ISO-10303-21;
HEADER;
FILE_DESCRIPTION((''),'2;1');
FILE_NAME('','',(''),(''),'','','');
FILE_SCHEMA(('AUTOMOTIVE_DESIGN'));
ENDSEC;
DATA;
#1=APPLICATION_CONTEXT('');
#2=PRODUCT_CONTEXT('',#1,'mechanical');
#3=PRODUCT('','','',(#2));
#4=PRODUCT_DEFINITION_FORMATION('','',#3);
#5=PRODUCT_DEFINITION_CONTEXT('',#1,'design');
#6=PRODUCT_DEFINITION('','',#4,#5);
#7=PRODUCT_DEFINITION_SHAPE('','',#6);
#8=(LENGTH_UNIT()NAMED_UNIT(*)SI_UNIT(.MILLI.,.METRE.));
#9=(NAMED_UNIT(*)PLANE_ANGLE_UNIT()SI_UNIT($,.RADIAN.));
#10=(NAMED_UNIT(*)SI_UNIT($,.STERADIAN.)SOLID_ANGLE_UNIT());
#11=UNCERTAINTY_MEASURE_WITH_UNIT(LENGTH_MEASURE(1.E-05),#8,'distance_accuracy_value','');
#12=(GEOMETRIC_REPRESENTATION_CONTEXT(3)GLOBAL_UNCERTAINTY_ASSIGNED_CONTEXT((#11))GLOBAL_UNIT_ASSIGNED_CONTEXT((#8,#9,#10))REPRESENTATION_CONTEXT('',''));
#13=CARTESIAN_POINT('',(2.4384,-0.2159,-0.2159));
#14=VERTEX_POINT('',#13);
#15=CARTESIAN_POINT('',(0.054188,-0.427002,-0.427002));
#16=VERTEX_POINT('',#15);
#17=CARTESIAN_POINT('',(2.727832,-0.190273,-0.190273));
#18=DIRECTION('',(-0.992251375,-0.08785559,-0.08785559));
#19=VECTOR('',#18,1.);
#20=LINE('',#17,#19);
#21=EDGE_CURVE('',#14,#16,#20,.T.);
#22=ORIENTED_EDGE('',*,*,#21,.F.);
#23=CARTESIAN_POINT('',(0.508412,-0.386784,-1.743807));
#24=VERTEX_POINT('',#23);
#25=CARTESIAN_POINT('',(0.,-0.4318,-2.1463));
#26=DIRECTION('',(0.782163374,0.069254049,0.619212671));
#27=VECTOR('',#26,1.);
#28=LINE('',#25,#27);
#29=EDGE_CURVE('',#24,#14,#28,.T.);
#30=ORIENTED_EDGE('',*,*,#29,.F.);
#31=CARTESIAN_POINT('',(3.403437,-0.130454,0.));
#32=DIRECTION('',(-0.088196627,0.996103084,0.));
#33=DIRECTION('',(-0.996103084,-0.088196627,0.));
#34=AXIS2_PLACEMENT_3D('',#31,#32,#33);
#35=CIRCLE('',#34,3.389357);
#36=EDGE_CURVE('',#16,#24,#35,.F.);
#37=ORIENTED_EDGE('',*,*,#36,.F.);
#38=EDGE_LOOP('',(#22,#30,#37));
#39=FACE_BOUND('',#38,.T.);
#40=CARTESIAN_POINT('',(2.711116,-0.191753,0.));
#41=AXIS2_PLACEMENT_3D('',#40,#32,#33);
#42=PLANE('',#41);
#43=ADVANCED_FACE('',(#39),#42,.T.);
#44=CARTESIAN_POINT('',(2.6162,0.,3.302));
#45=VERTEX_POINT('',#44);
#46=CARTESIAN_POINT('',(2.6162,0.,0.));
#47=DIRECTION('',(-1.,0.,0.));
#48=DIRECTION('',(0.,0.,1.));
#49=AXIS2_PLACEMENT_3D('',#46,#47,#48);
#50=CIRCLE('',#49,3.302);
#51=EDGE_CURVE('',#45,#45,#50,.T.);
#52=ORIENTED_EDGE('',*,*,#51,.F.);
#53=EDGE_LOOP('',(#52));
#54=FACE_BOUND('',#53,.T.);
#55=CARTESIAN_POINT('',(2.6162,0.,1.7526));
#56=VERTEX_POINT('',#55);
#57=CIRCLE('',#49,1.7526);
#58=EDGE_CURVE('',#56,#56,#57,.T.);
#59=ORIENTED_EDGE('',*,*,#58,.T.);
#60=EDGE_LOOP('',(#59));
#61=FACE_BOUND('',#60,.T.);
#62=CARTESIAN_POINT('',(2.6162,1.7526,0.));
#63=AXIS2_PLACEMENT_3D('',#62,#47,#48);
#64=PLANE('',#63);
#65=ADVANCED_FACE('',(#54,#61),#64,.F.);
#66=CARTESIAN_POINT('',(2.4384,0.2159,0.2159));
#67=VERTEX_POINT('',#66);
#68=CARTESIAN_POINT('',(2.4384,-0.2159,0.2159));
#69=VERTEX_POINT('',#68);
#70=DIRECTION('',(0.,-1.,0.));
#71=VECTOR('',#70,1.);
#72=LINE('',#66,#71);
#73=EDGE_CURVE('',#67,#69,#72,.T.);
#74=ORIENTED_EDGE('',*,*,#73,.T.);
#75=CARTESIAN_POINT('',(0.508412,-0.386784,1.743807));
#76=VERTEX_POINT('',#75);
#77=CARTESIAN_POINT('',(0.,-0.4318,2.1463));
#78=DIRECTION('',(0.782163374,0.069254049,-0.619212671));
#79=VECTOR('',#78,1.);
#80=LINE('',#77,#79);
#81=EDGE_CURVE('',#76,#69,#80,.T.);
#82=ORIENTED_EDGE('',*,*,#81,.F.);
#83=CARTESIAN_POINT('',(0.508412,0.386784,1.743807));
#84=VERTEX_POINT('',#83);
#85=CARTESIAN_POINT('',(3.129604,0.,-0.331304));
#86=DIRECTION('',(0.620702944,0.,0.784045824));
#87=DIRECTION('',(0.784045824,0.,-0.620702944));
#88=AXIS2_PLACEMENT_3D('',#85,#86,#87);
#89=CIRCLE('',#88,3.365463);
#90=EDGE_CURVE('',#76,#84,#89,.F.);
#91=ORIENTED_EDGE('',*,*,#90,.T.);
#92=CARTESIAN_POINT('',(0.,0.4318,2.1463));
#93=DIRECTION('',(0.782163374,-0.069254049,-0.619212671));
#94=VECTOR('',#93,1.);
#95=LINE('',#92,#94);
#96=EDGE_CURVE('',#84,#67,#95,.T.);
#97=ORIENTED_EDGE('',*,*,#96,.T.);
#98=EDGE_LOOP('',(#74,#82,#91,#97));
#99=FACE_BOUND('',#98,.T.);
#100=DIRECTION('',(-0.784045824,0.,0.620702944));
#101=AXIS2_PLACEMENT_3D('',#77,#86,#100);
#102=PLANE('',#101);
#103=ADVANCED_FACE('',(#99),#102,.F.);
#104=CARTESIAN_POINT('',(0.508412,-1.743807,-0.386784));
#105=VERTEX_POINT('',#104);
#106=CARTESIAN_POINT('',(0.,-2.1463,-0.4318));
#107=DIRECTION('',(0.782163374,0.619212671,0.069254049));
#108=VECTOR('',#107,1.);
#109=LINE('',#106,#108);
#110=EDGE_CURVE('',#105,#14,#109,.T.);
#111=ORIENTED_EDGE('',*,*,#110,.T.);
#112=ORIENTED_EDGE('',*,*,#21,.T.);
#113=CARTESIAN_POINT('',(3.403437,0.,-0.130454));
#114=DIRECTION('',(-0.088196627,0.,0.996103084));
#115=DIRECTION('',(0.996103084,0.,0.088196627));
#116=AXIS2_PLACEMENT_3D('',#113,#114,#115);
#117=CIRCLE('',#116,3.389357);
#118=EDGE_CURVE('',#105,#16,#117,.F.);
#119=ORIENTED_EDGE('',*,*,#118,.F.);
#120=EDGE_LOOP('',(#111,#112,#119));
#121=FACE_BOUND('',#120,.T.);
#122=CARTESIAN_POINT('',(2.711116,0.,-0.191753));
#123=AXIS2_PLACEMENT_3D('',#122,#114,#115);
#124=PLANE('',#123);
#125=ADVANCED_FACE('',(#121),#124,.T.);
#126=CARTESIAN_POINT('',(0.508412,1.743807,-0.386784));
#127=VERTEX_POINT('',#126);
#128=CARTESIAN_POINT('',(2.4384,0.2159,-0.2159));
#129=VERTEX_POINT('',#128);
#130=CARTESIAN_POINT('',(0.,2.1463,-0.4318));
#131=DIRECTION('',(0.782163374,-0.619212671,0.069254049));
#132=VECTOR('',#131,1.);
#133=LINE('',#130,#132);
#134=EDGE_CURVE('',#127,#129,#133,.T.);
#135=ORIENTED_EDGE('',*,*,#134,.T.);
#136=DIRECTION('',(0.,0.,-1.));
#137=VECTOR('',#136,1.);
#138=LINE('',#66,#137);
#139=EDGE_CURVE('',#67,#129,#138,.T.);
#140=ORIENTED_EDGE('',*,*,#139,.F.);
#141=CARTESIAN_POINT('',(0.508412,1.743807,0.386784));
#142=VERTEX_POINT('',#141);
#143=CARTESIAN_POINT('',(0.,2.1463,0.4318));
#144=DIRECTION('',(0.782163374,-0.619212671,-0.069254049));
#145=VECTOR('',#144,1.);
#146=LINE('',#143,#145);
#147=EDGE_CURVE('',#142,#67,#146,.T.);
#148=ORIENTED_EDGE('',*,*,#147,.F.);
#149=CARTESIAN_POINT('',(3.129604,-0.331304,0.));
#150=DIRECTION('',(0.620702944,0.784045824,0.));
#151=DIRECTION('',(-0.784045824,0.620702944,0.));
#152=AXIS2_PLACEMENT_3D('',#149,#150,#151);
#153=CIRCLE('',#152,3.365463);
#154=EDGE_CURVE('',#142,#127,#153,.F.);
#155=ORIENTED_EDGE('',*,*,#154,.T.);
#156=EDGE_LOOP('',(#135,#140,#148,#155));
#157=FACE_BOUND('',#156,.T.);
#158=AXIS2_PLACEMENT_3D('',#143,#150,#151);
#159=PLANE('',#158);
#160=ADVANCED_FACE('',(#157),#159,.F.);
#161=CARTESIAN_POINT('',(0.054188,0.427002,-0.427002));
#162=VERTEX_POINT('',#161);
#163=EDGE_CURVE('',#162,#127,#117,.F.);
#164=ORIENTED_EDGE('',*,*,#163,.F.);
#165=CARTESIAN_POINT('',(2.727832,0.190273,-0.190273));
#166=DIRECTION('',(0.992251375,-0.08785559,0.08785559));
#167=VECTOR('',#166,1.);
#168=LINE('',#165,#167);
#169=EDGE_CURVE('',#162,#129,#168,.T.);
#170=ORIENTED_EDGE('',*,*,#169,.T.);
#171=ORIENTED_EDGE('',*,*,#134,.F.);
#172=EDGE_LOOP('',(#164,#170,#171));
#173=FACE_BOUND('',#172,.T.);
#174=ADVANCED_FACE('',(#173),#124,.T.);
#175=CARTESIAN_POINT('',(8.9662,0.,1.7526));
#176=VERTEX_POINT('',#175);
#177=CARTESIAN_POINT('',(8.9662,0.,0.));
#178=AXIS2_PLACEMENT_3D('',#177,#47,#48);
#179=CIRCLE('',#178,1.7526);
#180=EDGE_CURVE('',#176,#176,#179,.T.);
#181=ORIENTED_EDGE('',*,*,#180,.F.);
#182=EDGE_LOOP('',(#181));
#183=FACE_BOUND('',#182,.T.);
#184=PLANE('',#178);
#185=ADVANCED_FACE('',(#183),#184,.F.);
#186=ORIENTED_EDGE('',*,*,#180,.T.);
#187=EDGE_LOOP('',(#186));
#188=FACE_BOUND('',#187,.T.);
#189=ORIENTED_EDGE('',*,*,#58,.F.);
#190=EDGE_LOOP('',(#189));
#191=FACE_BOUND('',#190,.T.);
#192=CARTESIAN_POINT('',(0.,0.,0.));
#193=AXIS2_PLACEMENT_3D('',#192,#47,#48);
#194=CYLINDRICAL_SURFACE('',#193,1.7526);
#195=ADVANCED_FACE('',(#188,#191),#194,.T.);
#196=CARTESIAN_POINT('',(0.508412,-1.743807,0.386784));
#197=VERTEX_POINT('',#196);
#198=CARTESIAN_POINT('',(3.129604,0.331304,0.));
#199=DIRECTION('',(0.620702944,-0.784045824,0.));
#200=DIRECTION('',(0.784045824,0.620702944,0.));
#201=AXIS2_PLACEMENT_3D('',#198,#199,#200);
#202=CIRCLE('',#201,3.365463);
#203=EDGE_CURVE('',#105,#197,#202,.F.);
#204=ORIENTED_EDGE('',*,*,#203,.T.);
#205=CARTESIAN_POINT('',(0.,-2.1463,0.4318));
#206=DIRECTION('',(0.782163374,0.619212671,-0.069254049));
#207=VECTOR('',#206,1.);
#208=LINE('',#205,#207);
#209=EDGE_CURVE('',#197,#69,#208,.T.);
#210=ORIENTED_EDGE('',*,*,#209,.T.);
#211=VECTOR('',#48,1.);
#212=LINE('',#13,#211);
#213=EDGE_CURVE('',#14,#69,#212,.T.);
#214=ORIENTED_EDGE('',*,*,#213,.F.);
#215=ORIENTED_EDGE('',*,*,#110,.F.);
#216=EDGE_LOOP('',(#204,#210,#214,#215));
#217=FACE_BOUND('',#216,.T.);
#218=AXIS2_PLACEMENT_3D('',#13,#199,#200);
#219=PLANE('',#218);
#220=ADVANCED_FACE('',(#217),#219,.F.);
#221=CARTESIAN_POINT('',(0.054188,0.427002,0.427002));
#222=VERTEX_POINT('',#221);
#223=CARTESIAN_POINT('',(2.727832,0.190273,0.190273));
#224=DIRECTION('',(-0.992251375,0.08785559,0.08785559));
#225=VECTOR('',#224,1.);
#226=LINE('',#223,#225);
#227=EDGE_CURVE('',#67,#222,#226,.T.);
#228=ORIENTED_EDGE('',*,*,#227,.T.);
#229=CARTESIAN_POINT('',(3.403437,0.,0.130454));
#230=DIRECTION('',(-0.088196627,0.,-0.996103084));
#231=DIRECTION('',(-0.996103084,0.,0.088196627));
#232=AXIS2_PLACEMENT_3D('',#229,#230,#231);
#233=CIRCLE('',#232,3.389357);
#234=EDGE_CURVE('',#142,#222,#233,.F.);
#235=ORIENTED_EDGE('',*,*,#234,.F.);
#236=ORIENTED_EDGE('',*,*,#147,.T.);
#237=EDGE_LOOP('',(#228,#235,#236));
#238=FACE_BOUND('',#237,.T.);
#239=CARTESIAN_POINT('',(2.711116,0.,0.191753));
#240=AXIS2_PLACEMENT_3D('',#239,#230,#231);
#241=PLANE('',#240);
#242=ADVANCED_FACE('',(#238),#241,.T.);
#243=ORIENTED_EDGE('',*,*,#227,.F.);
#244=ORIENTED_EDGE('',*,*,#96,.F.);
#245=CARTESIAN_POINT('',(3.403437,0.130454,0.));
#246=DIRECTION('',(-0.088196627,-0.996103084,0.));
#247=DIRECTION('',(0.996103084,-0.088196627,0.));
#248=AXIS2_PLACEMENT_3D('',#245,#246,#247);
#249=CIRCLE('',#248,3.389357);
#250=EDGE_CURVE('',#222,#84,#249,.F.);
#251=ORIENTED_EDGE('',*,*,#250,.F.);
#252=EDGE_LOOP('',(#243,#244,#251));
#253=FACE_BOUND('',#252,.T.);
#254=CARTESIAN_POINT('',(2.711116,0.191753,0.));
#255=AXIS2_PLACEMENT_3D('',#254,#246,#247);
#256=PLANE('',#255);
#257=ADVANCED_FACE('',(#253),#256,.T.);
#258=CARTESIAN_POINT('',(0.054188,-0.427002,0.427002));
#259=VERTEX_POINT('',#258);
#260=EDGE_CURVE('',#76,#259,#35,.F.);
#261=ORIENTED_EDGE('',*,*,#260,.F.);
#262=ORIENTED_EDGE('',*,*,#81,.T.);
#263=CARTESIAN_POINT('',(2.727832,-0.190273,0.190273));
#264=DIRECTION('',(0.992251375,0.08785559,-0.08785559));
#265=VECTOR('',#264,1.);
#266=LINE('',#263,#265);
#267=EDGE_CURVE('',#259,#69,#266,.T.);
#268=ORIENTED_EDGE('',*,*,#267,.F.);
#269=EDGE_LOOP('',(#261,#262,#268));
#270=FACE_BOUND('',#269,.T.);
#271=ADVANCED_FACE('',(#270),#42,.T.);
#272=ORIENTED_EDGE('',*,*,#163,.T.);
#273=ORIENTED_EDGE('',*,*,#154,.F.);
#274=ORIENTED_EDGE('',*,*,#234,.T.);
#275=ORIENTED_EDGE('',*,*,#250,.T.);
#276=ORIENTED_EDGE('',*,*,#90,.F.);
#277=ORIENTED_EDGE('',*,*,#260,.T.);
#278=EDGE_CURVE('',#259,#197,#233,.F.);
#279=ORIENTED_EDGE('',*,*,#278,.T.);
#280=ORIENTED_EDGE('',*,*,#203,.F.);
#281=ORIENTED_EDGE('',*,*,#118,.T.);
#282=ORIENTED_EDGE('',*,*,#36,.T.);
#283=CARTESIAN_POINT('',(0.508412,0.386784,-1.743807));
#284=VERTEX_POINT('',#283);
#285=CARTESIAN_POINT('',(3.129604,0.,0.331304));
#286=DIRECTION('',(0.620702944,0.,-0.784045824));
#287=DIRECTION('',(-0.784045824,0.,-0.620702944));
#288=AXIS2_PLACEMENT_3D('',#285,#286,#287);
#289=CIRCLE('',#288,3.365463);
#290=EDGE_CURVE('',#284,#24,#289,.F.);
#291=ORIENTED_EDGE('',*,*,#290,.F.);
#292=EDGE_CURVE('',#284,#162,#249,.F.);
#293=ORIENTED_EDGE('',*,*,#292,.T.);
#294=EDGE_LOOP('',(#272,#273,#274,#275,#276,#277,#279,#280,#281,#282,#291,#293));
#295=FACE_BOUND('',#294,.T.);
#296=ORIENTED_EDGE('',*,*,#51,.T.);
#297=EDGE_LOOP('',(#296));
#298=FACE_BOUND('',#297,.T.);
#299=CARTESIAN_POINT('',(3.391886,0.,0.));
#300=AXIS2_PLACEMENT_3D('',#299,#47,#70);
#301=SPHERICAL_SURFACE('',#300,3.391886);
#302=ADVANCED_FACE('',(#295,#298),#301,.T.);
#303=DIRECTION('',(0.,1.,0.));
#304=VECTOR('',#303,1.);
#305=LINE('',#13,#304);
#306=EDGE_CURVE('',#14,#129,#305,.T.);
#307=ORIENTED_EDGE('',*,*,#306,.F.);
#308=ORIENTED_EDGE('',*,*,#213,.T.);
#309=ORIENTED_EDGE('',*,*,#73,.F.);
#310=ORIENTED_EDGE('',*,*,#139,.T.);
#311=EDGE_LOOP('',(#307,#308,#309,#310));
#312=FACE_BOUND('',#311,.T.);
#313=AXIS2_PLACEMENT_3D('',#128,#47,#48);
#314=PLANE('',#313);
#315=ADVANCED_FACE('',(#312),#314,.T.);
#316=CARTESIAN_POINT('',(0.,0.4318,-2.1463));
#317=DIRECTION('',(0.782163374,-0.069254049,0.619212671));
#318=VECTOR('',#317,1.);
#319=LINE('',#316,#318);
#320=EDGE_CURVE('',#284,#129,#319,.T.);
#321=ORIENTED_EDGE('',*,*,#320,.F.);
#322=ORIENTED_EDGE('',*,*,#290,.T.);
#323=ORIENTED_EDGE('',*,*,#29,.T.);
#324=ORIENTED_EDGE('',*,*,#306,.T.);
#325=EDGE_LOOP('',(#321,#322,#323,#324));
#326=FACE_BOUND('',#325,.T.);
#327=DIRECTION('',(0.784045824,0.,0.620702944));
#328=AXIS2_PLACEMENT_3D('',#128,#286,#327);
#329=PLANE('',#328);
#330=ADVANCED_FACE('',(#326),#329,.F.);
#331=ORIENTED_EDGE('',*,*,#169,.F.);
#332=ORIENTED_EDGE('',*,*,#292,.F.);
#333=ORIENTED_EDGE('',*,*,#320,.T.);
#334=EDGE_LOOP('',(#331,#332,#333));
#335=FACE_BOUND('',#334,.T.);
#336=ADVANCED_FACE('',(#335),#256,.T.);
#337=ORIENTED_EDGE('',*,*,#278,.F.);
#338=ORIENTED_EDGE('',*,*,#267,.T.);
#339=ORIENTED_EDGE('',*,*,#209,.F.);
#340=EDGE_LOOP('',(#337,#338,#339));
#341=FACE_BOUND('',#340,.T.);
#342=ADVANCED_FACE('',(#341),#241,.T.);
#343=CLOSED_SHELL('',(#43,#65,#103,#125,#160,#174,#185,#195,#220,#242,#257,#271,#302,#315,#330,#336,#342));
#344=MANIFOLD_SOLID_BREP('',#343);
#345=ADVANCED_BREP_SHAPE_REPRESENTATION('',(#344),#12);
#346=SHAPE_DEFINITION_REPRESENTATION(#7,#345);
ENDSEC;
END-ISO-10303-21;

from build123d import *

# Parameters (mm, degrees)
CIRPATTERN1_COUNT = 2
CIRPATTERN1_ANGLE = 90


# Read off the part's stored shape, not the designer's step: ThreadSchematic
with BuildPart() as part:
    # ThreadSchematic outline → ThreadSchematic (revolve)
    with BuildSketch(Plane.YX):
        with BuildLine():
            Line((0, 8.9662), (0, 0))
            ThreePointArc((0, 0), (2.106401342, 0.733321609), (3.302000001, 2.616200001))
            Line((3.302000001, 2.616200001), (1.7526, 2.6162))
            Line((1.7526, 2.6162), (1.7526, 8.9662))
            Line((1.7526, 8.9662), (0, 8.9662))
        make_face()
    revolve(axis=Axis((0, 0, 0), (1, 0, 0)))

    # Sketch3 → Cross section 0
    with BuildSketch(Plane(origin=(0, 0, 0), x_dir=(0, 0, -1), z_dir=(1, 0, 0))):
        with BuildLine():
            Line((0.4318, -2.1463), (-0.4318, -2.1463))
            Line((-0.4318, -2.1463), (-0.4318, 2.1463))
            Line((-0.4318, 2.1463), (0.4318, 2.1463))
            Line((0.4318, 2.1463), (0.4318, -2.1463))
        make_face()
    # Sketch4 → Cross section 1
    with BuildSketch(Plane(origin=(2.4384, 0, 0), x_dir=(0, 0, -1), z_dir=(1, 0, 0))):
        with BuildLine():
            Line((0.2159, -0.2159), (-0.2159, -0.2159))
            Line((-0.2159, -0.2159), (-0.2159, 0.2159))
            Line((-0.2159, 0.2159), (0.2159, 0.2159))
            Line((0.2159, 0.2159), (0.2159, -0.2159))
        make_face()
    cross = loft(mode=Mode.SUBTRACT)

    # CirPattern1: Cross ×2 about axis
    cirpattern1_axis = Axis((0, 0, 0), (1, 0, 0))
    for i in range(1, CIRPATTERN1_COUNT):
        add(cross.rotate(cirpattern1_axis, i * CIRPATTERN1_ANGLE / (CIRPATTERN1_COUNT - 1)), mode=Mode.SUBTRACT)


solid = part.part
